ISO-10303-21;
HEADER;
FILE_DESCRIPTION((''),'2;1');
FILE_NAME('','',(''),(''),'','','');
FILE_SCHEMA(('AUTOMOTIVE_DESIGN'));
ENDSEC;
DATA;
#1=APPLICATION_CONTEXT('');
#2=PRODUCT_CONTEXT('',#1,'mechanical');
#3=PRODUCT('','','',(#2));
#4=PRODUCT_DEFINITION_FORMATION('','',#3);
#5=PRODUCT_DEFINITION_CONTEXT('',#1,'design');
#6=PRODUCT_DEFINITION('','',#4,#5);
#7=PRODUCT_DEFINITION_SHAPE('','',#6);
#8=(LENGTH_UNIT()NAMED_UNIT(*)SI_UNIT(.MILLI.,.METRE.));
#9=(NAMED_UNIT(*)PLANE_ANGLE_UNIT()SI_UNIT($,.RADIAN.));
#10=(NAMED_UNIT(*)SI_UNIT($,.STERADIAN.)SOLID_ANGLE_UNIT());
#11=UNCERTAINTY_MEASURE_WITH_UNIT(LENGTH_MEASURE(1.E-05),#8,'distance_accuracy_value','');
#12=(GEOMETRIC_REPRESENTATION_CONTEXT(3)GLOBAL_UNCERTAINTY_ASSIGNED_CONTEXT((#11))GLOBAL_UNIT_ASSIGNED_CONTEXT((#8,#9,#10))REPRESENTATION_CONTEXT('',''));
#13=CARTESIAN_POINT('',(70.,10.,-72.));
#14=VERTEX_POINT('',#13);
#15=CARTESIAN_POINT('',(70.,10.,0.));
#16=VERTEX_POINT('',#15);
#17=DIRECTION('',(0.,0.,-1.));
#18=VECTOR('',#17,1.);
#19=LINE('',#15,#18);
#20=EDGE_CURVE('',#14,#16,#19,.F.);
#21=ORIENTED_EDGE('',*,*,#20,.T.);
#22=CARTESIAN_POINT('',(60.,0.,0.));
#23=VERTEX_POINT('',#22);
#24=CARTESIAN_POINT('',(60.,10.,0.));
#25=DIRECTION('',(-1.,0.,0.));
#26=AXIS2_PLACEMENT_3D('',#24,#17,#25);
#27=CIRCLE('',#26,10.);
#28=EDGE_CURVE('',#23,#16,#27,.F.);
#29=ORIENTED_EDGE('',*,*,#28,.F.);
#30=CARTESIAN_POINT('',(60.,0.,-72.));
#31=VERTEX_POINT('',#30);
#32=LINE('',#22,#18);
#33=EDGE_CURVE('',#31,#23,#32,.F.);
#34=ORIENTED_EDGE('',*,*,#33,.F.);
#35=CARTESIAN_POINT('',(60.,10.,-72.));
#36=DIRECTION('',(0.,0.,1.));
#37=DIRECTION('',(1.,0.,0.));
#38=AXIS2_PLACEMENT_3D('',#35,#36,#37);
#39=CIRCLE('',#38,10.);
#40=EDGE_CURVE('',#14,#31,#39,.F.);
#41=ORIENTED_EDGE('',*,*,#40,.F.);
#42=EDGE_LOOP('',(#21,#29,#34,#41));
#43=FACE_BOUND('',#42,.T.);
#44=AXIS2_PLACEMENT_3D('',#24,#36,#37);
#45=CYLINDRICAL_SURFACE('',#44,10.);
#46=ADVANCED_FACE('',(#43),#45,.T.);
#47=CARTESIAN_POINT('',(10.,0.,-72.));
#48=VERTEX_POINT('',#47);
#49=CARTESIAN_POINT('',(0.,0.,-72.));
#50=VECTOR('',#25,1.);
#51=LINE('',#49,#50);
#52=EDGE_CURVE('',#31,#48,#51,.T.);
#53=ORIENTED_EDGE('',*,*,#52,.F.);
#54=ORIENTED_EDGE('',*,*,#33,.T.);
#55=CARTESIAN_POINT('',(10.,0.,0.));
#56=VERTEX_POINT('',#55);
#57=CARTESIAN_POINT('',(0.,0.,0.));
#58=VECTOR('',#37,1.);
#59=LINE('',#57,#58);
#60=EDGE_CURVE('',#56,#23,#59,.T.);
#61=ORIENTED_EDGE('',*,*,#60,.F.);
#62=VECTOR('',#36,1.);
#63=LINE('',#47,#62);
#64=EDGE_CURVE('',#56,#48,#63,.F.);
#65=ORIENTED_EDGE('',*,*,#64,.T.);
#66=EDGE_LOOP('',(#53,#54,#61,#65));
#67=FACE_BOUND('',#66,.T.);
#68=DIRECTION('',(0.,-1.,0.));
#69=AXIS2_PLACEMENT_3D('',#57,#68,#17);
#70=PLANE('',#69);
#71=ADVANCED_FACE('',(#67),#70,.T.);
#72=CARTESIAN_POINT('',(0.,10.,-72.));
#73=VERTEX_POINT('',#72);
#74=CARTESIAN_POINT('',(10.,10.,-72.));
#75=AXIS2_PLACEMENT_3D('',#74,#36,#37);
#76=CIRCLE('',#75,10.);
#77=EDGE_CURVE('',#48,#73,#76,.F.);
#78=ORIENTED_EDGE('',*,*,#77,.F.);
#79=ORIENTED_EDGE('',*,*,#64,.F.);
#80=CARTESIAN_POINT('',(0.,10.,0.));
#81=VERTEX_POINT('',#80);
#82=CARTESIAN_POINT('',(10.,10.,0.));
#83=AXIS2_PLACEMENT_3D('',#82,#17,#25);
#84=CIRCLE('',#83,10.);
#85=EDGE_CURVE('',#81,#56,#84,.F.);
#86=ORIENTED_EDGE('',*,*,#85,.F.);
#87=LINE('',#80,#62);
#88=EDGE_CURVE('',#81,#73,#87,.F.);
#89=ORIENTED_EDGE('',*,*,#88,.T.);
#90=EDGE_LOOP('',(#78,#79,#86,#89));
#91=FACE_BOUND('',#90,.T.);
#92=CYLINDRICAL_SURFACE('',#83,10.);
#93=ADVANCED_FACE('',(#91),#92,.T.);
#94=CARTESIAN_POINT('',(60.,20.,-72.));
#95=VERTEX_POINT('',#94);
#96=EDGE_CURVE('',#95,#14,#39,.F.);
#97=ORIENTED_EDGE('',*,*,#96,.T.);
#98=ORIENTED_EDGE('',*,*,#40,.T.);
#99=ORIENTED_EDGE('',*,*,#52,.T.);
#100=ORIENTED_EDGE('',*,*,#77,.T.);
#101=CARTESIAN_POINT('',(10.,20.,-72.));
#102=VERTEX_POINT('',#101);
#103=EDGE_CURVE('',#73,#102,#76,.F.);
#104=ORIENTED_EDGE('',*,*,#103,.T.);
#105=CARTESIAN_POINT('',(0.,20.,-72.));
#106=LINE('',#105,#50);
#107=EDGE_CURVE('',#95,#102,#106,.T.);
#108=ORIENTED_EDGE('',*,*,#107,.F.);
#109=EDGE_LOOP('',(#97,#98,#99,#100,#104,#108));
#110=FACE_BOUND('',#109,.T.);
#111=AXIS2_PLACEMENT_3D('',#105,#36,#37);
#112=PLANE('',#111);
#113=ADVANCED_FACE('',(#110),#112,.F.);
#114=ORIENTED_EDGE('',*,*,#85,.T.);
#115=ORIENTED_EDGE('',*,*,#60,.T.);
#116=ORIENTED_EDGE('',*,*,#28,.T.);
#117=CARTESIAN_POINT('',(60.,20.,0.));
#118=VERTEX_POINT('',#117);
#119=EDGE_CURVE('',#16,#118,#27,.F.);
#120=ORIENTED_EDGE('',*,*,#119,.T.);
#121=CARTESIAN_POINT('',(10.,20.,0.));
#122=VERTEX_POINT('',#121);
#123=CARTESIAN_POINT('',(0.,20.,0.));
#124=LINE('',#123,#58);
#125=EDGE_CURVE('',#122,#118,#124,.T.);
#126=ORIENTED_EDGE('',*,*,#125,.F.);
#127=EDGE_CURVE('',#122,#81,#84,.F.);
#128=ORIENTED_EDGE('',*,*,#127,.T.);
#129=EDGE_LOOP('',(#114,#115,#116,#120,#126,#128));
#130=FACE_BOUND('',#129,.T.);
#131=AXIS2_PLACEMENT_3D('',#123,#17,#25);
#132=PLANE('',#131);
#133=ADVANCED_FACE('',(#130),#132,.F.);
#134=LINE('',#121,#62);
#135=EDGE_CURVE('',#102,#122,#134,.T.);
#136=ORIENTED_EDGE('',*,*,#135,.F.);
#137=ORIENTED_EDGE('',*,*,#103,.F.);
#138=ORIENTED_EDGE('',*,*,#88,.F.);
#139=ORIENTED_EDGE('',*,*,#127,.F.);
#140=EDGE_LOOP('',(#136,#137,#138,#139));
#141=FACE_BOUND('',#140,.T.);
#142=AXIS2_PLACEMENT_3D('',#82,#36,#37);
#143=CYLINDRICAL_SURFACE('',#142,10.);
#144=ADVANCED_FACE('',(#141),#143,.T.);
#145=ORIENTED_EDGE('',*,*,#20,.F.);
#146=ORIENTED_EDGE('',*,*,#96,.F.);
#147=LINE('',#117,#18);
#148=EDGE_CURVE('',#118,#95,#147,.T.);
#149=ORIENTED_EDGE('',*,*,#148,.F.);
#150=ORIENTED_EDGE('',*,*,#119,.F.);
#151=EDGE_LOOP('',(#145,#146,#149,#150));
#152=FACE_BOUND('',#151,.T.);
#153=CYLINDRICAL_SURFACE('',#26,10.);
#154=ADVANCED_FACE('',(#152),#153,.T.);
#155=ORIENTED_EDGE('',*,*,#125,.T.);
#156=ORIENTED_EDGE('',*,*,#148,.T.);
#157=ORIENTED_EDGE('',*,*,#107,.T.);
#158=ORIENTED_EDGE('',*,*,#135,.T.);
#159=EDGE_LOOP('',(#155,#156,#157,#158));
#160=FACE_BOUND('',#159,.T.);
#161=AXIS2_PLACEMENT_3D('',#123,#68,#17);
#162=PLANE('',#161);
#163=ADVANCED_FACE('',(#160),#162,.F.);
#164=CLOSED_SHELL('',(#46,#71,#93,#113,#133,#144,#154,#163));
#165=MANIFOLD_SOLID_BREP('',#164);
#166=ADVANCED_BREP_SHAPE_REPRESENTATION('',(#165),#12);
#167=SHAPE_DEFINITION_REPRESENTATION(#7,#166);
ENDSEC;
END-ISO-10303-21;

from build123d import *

# Parameters (mm, degrees)
SKETCH1_W           = 70
SKETCH1_H           = 72
BOSS_EXTRUDE1_DEPTH = 20
FILLET1_R           = 10


with BuildPart() as part:
    # Sketch1 → Boss-Extrude1 (new body)
    with BuildSketch(Plane(origin=(0, 0, 0), x_dir=(1, 0, 0), z_dir=(0, 1, 0))):
        with Locations((35, 36)):
            Rectangle(SKETCH1_W, SKETCH1_H)
    extrude(amount=BOSS_EXTRUDE1_DEPTH)

    # Fillet1
    fillet1_edges = [part.edges().sort_by_distance(p)[0] for p in [
        (0, 0, -36),
        (70, 0, -36),
        (70, 20, -36),
        (0, 20, -36),
    ]]
    fillet(fillet1_edges, radius=FILLET1_R - 0.0001)  # a hair under: the kernel refuses the full size


solid = part.part
